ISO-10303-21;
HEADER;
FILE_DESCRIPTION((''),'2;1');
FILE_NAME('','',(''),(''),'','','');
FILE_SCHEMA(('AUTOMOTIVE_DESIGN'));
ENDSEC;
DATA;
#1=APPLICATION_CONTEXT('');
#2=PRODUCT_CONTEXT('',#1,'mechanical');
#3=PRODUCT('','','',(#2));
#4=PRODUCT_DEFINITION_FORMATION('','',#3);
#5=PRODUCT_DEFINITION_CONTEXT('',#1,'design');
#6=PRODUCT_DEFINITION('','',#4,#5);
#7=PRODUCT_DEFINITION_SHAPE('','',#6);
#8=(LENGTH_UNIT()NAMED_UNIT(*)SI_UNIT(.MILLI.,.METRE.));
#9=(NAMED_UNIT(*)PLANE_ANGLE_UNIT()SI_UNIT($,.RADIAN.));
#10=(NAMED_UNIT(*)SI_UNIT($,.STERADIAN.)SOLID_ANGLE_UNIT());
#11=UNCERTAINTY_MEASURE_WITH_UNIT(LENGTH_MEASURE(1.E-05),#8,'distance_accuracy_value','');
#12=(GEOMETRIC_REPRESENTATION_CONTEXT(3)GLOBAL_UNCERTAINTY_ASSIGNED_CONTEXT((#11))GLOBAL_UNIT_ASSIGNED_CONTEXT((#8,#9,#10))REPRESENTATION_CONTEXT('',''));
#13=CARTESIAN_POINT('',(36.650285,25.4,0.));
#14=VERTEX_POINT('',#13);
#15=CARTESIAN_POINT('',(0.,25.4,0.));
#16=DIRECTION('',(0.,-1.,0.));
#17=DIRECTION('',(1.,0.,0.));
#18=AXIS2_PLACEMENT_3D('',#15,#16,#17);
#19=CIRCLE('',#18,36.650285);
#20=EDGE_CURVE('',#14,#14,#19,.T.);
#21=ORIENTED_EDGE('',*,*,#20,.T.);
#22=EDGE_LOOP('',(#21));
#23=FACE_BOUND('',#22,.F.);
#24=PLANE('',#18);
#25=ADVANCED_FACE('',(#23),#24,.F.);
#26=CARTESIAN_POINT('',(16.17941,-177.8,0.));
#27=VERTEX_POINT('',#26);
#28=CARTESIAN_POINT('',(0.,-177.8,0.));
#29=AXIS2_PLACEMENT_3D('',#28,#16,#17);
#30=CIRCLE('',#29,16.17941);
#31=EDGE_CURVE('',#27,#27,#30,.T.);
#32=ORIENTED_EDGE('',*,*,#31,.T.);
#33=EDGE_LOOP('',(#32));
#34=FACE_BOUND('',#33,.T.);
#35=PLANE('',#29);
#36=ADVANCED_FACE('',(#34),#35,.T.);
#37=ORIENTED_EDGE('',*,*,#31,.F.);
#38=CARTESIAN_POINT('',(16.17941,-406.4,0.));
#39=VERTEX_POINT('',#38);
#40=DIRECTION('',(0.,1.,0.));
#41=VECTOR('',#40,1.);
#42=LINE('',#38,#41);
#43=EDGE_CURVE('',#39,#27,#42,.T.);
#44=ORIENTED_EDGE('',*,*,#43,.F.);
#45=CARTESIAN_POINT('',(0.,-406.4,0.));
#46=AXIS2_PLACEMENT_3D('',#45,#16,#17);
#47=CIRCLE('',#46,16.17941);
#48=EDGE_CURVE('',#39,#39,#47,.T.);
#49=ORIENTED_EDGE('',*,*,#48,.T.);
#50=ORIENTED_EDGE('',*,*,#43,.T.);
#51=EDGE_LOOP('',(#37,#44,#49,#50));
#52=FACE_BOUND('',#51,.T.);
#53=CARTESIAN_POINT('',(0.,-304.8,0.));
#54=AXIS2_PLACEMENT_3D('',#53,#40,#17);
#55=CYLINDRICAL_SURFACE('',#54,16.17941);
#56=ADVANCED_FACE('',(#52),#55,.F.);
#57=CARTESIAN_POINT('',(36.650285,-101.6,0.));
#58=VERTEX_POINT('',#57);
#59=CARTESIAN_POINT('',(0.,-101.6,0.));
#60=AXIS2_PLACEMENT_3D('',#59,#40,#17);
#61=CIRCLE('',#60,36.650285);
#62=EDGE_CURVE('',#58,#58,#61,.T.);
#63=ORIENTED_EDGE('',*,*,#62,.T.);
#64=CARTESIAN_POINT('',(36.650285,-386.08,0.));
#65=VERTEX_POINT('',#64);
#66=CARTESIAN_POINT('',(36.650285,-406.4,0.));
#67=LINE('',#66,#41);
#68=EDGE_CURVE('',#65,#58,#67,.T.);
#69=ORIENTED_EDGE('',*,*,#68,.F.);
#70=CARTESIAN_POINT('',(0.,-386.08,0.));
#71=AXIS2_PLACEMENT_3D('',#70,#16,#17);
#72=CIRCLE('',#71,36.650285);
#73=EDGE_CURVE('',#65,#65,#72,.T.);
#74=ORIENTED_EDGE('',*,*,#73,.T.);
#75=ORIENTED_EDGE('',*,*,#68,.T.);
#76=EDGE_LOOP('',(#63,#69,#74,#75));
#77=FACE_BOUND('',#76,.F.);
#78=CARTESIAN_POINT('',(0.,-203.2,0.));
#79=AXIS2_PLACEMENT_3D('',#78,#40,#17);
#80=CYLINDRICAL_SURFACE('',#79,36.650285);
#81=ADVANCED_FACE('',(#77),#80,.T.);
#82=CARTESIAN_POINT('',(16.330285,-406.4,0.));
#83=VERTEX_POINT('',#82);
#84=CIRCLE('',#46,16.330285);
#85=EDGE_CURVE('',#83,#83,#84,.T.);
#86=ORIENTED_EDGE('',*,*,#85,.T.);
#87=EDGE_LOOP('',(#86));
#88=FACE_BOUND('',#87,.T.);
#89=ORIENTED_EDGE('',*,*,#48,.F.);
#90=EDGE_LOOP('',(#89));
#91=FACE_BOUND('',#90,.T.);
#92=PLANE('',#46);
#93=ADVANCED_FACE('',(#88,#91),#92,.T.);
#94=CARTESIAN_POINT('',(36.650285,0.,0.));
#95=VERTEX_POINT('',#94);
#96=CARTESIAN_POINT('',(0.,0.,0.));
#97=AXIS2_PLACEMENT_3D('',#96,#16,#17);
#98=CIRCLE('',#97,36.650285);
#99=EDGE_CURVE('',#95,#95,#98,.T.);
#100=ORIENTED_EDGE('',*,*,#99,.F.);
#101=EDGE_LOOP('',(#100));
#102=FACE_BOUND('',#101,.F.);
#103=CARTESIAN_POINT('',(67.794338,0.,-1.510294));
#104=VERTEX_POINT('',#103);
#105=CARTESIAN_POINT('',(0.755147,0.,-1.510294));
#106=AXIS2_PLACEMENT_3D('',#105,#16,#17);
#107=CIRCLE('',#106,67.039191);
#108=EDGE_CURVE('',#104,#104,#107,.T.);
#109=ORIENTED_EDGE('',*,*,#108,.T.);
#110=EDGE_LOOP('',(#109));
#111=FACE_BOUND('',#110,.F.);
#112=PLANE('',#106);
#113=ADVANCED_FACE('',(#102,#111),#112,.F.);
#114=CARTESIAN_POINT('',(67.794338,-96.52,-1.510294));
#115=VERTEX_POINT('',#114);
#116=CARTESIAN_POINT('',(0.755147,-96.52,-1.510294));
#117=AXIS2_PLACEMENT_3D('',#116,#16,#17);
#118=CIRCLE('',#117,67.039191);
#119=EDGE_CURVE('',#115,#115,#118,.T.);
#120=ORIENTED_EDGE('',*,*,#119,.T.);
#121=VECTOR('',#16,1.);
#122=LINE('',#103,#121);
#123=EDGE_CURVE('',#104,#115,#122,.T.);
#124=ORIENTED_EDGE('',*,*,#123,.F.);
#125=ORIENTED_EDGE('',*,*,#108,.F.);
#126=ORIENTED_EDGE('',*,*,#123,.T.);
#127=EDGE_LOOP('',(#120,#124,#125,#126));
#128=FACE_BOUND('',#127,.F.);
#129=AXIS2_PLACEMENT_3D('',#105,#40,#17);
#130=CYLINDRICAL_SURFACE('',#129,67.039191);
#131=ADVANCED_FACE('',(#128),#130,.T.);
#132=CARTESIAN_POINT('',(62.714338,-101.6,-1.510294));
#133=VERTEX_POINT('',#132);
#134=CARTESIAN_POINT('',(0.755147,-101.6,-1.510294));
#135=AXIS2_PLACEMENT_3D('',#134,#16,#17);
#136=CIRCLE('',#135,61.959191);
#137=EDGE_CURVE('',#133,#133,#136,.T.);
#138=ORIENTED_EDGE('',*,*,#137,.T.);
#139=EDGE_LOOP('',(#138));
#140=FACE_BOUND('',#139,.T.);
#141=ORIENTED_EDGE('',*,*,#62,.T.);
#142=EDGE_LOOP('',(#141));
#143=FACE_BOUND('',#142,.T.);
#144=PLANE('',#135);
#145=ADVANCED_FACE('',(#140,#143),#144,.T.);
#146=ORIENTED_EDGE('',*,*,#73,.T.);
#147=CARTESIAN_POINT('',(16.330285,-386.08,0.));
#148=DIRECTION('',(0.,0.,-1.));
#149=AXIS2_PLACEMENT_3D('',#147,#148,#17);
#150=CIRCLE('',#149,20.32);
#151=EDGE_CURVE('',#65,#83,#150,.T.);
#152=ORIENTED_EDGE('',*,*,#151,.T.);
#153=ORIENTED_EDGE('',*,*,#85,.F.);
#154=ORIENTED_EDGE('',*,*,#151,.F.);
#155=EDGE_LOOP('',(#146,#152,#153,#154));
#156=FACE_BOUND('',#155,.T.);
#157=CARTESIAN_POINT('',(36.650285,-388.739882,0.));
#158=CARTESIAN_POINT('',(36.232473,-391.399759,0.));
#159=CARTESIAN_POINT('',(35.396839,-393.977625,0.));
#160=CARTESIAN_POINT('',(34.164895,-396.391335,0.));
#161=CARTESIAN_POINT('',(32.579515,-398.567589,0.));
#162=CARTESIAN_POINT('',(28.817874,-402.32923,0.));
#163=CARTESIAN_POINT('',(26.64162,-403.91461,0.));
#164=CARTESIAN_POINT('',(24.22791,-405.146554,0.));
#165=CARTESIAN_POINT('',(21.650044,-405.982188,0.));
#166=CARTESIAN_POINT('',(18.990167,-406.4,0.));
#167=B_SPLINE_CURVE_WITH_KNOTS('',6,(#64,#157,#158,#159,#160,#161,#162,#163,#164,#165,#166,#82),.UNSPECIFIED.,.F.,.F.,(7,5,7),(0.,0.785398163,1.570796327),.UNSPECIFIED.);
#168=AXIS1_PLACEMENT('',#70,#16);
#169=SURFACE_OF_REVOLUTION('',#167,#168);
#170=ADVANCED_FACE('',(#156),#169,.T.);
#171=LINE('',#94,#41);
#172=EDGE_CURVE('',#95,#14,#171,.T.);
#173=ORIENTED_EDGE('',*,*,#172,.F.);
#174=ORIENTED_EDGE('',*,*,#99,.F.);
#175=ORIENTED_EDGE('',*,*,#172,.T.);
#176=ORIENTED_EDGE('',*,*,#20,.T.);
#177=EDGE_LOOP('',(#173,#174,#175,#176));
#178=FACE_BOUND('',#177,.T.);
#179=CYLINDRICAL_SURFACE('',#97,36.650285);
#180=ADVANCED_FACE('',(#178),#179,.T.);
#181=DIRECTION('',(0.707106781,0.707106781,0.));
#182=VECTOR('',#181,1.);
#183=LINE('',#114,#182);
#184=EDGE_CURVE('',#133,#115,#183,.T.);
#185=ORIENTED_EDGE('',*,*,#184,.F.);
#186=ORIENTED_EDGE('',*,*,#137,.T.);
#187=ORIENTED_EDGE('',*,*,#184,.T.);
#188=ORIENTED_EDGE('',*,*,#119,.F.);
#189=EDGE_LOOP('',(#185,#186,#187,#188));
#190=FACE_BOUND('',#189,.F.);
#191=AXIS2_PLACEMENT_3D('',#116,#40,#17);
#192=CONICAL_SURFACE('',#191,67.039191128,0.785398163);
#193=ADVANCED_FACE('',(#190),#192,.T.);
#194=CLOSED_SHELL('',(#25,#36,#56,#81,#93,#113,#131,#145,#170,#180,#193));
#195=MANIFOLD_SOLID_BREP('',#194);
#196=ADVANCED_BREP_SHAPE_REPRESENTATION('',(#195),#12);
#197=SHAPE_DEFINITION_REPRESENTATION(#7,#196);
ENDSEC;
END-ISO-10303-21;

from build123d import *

# Parameters (mm, degrees)
F0_R        = 36.650285017
F1_DEPTH    = 50.8
F2_R        = 16.1794098337
F3_DEPTH    = 127
F5_R        = 28.203657399
F5_R_2      = 16.1794098337
F4_R        = 16.1794098337
F3_FACE_R   = 16.1794098337
F6_DEPTH    = 50.8
F7_DEPTH    = 101.6
F8_DEPTH    = 50.8
F9_DEPTH    = 101.6
F10_DEPTH   = 25.4
F11_R       = 67.0391911282
F9_FACE_R   = 36.650285017
F9_FACE_R_2 = 16.1794098337
F12_DEPTH   = 101.6
F13_R       = 20.32
F14_SIZE    = 5.08


with BuildPart() as f1:
    # F0 (on Front) → F1 (new body)
    with BuildSketch(Plane.XZ):
        Circle(F0_R)
    extrude(amount=F1_DEPTH)

    # F2 (on face) → F3 (join)
    with BuildSketch(Plane.XZ.offset(50.8)):
        Circle(F2_R)
    extrude(amount=F3_DEPTH)

    # F5 (on face) + F4 (on face) + F3_face (on face) → F6 (cut)
    with BuildSketch(Plane.XZ.offset(177.8)):
        Circle(F5_R)
        Circle(F5_R_2, mode=Mode.SUBTRACT)
        Circle(F5_R_2)
    with BuildSketch(Plane.XZ.offset(177.8)):
        Circle(F4_R)
    with BuildSketch(Plane.XZ.offset(177.8)):
        Circle(F3_FACE_R)
    extrude(amount=-F6_DEPTH, mode=Mode.SUBTRACT)

    # F7 (add): faces of the model
    f7_faces = [f1.faces().sort_by_distance(p)[0] for p in [
        (-35.6136584143, -50.8, 0),
        (0, 0, 0),
    ]]
    extrude(f7_faces, amount=F7_DEPTH, dir=(0, -1, 0))

    # F8 (add): faces of the model
    f8_faces = [f1.faces().sort_by_distance(p)[0] for p in [
        (-35.6136584143, -152.4, 0),
        (0, -127, 0),
        (0, 0, 0),
    ]]
    extrude(f8_faces, amount=F8_DEPTH, dir=(0, -1, 0))

    # F9 (add): faces of the model
    f9_faces = [f1.faces().sort_by_distance(p)[0] for p in [
        (-35.6136584143, -203.2, 0),
        (0, 0, 0),
    ]]
    extrude(f9_faces, amount=F9_DEPTH, dir=(0, -1, 0))

    # F10 (add): faces of the model
    f10_faces = [f1.faces().sort_by_distance(p)[0] for p in [
        (0, -177.8, 0),
        (0, 0, 0),
    ]]
    extrude(f10_faces, amount=-F10_DEPTH, dir=(0, -1, 0))

    # F11 (on Front) + F9_face (on face) → F12 (join)
    with BuildSketch(Plane.XZ):
        with Locations((0.7551472518, -1.5102935722)):
            Circle(F11_R)
    with BuildSketch(Plane.XZ.offset(304.8)):
        Circle(F9_FACE_R)
        Circle(F9_FACE_R_2, mode=Mode.SUBTRACT)
    extrude(amount=F12_DEPTH)

    # F13
    f13_edges = [f1.edges().sort_by_distance(p)[0] for p in [
        (-36.650285, -406.4, 0),
    ]]
    fillet(f13_edges, radius=F13_R)

    # F14
    f14_edges = [f1.edges().sort_by_distance(p)[0] for p in [
        (-66.284044, -101.6, -1.510294),
    ]]
    chamfer(f14_edges, length=F14_SIZE)


solid = f1.part
